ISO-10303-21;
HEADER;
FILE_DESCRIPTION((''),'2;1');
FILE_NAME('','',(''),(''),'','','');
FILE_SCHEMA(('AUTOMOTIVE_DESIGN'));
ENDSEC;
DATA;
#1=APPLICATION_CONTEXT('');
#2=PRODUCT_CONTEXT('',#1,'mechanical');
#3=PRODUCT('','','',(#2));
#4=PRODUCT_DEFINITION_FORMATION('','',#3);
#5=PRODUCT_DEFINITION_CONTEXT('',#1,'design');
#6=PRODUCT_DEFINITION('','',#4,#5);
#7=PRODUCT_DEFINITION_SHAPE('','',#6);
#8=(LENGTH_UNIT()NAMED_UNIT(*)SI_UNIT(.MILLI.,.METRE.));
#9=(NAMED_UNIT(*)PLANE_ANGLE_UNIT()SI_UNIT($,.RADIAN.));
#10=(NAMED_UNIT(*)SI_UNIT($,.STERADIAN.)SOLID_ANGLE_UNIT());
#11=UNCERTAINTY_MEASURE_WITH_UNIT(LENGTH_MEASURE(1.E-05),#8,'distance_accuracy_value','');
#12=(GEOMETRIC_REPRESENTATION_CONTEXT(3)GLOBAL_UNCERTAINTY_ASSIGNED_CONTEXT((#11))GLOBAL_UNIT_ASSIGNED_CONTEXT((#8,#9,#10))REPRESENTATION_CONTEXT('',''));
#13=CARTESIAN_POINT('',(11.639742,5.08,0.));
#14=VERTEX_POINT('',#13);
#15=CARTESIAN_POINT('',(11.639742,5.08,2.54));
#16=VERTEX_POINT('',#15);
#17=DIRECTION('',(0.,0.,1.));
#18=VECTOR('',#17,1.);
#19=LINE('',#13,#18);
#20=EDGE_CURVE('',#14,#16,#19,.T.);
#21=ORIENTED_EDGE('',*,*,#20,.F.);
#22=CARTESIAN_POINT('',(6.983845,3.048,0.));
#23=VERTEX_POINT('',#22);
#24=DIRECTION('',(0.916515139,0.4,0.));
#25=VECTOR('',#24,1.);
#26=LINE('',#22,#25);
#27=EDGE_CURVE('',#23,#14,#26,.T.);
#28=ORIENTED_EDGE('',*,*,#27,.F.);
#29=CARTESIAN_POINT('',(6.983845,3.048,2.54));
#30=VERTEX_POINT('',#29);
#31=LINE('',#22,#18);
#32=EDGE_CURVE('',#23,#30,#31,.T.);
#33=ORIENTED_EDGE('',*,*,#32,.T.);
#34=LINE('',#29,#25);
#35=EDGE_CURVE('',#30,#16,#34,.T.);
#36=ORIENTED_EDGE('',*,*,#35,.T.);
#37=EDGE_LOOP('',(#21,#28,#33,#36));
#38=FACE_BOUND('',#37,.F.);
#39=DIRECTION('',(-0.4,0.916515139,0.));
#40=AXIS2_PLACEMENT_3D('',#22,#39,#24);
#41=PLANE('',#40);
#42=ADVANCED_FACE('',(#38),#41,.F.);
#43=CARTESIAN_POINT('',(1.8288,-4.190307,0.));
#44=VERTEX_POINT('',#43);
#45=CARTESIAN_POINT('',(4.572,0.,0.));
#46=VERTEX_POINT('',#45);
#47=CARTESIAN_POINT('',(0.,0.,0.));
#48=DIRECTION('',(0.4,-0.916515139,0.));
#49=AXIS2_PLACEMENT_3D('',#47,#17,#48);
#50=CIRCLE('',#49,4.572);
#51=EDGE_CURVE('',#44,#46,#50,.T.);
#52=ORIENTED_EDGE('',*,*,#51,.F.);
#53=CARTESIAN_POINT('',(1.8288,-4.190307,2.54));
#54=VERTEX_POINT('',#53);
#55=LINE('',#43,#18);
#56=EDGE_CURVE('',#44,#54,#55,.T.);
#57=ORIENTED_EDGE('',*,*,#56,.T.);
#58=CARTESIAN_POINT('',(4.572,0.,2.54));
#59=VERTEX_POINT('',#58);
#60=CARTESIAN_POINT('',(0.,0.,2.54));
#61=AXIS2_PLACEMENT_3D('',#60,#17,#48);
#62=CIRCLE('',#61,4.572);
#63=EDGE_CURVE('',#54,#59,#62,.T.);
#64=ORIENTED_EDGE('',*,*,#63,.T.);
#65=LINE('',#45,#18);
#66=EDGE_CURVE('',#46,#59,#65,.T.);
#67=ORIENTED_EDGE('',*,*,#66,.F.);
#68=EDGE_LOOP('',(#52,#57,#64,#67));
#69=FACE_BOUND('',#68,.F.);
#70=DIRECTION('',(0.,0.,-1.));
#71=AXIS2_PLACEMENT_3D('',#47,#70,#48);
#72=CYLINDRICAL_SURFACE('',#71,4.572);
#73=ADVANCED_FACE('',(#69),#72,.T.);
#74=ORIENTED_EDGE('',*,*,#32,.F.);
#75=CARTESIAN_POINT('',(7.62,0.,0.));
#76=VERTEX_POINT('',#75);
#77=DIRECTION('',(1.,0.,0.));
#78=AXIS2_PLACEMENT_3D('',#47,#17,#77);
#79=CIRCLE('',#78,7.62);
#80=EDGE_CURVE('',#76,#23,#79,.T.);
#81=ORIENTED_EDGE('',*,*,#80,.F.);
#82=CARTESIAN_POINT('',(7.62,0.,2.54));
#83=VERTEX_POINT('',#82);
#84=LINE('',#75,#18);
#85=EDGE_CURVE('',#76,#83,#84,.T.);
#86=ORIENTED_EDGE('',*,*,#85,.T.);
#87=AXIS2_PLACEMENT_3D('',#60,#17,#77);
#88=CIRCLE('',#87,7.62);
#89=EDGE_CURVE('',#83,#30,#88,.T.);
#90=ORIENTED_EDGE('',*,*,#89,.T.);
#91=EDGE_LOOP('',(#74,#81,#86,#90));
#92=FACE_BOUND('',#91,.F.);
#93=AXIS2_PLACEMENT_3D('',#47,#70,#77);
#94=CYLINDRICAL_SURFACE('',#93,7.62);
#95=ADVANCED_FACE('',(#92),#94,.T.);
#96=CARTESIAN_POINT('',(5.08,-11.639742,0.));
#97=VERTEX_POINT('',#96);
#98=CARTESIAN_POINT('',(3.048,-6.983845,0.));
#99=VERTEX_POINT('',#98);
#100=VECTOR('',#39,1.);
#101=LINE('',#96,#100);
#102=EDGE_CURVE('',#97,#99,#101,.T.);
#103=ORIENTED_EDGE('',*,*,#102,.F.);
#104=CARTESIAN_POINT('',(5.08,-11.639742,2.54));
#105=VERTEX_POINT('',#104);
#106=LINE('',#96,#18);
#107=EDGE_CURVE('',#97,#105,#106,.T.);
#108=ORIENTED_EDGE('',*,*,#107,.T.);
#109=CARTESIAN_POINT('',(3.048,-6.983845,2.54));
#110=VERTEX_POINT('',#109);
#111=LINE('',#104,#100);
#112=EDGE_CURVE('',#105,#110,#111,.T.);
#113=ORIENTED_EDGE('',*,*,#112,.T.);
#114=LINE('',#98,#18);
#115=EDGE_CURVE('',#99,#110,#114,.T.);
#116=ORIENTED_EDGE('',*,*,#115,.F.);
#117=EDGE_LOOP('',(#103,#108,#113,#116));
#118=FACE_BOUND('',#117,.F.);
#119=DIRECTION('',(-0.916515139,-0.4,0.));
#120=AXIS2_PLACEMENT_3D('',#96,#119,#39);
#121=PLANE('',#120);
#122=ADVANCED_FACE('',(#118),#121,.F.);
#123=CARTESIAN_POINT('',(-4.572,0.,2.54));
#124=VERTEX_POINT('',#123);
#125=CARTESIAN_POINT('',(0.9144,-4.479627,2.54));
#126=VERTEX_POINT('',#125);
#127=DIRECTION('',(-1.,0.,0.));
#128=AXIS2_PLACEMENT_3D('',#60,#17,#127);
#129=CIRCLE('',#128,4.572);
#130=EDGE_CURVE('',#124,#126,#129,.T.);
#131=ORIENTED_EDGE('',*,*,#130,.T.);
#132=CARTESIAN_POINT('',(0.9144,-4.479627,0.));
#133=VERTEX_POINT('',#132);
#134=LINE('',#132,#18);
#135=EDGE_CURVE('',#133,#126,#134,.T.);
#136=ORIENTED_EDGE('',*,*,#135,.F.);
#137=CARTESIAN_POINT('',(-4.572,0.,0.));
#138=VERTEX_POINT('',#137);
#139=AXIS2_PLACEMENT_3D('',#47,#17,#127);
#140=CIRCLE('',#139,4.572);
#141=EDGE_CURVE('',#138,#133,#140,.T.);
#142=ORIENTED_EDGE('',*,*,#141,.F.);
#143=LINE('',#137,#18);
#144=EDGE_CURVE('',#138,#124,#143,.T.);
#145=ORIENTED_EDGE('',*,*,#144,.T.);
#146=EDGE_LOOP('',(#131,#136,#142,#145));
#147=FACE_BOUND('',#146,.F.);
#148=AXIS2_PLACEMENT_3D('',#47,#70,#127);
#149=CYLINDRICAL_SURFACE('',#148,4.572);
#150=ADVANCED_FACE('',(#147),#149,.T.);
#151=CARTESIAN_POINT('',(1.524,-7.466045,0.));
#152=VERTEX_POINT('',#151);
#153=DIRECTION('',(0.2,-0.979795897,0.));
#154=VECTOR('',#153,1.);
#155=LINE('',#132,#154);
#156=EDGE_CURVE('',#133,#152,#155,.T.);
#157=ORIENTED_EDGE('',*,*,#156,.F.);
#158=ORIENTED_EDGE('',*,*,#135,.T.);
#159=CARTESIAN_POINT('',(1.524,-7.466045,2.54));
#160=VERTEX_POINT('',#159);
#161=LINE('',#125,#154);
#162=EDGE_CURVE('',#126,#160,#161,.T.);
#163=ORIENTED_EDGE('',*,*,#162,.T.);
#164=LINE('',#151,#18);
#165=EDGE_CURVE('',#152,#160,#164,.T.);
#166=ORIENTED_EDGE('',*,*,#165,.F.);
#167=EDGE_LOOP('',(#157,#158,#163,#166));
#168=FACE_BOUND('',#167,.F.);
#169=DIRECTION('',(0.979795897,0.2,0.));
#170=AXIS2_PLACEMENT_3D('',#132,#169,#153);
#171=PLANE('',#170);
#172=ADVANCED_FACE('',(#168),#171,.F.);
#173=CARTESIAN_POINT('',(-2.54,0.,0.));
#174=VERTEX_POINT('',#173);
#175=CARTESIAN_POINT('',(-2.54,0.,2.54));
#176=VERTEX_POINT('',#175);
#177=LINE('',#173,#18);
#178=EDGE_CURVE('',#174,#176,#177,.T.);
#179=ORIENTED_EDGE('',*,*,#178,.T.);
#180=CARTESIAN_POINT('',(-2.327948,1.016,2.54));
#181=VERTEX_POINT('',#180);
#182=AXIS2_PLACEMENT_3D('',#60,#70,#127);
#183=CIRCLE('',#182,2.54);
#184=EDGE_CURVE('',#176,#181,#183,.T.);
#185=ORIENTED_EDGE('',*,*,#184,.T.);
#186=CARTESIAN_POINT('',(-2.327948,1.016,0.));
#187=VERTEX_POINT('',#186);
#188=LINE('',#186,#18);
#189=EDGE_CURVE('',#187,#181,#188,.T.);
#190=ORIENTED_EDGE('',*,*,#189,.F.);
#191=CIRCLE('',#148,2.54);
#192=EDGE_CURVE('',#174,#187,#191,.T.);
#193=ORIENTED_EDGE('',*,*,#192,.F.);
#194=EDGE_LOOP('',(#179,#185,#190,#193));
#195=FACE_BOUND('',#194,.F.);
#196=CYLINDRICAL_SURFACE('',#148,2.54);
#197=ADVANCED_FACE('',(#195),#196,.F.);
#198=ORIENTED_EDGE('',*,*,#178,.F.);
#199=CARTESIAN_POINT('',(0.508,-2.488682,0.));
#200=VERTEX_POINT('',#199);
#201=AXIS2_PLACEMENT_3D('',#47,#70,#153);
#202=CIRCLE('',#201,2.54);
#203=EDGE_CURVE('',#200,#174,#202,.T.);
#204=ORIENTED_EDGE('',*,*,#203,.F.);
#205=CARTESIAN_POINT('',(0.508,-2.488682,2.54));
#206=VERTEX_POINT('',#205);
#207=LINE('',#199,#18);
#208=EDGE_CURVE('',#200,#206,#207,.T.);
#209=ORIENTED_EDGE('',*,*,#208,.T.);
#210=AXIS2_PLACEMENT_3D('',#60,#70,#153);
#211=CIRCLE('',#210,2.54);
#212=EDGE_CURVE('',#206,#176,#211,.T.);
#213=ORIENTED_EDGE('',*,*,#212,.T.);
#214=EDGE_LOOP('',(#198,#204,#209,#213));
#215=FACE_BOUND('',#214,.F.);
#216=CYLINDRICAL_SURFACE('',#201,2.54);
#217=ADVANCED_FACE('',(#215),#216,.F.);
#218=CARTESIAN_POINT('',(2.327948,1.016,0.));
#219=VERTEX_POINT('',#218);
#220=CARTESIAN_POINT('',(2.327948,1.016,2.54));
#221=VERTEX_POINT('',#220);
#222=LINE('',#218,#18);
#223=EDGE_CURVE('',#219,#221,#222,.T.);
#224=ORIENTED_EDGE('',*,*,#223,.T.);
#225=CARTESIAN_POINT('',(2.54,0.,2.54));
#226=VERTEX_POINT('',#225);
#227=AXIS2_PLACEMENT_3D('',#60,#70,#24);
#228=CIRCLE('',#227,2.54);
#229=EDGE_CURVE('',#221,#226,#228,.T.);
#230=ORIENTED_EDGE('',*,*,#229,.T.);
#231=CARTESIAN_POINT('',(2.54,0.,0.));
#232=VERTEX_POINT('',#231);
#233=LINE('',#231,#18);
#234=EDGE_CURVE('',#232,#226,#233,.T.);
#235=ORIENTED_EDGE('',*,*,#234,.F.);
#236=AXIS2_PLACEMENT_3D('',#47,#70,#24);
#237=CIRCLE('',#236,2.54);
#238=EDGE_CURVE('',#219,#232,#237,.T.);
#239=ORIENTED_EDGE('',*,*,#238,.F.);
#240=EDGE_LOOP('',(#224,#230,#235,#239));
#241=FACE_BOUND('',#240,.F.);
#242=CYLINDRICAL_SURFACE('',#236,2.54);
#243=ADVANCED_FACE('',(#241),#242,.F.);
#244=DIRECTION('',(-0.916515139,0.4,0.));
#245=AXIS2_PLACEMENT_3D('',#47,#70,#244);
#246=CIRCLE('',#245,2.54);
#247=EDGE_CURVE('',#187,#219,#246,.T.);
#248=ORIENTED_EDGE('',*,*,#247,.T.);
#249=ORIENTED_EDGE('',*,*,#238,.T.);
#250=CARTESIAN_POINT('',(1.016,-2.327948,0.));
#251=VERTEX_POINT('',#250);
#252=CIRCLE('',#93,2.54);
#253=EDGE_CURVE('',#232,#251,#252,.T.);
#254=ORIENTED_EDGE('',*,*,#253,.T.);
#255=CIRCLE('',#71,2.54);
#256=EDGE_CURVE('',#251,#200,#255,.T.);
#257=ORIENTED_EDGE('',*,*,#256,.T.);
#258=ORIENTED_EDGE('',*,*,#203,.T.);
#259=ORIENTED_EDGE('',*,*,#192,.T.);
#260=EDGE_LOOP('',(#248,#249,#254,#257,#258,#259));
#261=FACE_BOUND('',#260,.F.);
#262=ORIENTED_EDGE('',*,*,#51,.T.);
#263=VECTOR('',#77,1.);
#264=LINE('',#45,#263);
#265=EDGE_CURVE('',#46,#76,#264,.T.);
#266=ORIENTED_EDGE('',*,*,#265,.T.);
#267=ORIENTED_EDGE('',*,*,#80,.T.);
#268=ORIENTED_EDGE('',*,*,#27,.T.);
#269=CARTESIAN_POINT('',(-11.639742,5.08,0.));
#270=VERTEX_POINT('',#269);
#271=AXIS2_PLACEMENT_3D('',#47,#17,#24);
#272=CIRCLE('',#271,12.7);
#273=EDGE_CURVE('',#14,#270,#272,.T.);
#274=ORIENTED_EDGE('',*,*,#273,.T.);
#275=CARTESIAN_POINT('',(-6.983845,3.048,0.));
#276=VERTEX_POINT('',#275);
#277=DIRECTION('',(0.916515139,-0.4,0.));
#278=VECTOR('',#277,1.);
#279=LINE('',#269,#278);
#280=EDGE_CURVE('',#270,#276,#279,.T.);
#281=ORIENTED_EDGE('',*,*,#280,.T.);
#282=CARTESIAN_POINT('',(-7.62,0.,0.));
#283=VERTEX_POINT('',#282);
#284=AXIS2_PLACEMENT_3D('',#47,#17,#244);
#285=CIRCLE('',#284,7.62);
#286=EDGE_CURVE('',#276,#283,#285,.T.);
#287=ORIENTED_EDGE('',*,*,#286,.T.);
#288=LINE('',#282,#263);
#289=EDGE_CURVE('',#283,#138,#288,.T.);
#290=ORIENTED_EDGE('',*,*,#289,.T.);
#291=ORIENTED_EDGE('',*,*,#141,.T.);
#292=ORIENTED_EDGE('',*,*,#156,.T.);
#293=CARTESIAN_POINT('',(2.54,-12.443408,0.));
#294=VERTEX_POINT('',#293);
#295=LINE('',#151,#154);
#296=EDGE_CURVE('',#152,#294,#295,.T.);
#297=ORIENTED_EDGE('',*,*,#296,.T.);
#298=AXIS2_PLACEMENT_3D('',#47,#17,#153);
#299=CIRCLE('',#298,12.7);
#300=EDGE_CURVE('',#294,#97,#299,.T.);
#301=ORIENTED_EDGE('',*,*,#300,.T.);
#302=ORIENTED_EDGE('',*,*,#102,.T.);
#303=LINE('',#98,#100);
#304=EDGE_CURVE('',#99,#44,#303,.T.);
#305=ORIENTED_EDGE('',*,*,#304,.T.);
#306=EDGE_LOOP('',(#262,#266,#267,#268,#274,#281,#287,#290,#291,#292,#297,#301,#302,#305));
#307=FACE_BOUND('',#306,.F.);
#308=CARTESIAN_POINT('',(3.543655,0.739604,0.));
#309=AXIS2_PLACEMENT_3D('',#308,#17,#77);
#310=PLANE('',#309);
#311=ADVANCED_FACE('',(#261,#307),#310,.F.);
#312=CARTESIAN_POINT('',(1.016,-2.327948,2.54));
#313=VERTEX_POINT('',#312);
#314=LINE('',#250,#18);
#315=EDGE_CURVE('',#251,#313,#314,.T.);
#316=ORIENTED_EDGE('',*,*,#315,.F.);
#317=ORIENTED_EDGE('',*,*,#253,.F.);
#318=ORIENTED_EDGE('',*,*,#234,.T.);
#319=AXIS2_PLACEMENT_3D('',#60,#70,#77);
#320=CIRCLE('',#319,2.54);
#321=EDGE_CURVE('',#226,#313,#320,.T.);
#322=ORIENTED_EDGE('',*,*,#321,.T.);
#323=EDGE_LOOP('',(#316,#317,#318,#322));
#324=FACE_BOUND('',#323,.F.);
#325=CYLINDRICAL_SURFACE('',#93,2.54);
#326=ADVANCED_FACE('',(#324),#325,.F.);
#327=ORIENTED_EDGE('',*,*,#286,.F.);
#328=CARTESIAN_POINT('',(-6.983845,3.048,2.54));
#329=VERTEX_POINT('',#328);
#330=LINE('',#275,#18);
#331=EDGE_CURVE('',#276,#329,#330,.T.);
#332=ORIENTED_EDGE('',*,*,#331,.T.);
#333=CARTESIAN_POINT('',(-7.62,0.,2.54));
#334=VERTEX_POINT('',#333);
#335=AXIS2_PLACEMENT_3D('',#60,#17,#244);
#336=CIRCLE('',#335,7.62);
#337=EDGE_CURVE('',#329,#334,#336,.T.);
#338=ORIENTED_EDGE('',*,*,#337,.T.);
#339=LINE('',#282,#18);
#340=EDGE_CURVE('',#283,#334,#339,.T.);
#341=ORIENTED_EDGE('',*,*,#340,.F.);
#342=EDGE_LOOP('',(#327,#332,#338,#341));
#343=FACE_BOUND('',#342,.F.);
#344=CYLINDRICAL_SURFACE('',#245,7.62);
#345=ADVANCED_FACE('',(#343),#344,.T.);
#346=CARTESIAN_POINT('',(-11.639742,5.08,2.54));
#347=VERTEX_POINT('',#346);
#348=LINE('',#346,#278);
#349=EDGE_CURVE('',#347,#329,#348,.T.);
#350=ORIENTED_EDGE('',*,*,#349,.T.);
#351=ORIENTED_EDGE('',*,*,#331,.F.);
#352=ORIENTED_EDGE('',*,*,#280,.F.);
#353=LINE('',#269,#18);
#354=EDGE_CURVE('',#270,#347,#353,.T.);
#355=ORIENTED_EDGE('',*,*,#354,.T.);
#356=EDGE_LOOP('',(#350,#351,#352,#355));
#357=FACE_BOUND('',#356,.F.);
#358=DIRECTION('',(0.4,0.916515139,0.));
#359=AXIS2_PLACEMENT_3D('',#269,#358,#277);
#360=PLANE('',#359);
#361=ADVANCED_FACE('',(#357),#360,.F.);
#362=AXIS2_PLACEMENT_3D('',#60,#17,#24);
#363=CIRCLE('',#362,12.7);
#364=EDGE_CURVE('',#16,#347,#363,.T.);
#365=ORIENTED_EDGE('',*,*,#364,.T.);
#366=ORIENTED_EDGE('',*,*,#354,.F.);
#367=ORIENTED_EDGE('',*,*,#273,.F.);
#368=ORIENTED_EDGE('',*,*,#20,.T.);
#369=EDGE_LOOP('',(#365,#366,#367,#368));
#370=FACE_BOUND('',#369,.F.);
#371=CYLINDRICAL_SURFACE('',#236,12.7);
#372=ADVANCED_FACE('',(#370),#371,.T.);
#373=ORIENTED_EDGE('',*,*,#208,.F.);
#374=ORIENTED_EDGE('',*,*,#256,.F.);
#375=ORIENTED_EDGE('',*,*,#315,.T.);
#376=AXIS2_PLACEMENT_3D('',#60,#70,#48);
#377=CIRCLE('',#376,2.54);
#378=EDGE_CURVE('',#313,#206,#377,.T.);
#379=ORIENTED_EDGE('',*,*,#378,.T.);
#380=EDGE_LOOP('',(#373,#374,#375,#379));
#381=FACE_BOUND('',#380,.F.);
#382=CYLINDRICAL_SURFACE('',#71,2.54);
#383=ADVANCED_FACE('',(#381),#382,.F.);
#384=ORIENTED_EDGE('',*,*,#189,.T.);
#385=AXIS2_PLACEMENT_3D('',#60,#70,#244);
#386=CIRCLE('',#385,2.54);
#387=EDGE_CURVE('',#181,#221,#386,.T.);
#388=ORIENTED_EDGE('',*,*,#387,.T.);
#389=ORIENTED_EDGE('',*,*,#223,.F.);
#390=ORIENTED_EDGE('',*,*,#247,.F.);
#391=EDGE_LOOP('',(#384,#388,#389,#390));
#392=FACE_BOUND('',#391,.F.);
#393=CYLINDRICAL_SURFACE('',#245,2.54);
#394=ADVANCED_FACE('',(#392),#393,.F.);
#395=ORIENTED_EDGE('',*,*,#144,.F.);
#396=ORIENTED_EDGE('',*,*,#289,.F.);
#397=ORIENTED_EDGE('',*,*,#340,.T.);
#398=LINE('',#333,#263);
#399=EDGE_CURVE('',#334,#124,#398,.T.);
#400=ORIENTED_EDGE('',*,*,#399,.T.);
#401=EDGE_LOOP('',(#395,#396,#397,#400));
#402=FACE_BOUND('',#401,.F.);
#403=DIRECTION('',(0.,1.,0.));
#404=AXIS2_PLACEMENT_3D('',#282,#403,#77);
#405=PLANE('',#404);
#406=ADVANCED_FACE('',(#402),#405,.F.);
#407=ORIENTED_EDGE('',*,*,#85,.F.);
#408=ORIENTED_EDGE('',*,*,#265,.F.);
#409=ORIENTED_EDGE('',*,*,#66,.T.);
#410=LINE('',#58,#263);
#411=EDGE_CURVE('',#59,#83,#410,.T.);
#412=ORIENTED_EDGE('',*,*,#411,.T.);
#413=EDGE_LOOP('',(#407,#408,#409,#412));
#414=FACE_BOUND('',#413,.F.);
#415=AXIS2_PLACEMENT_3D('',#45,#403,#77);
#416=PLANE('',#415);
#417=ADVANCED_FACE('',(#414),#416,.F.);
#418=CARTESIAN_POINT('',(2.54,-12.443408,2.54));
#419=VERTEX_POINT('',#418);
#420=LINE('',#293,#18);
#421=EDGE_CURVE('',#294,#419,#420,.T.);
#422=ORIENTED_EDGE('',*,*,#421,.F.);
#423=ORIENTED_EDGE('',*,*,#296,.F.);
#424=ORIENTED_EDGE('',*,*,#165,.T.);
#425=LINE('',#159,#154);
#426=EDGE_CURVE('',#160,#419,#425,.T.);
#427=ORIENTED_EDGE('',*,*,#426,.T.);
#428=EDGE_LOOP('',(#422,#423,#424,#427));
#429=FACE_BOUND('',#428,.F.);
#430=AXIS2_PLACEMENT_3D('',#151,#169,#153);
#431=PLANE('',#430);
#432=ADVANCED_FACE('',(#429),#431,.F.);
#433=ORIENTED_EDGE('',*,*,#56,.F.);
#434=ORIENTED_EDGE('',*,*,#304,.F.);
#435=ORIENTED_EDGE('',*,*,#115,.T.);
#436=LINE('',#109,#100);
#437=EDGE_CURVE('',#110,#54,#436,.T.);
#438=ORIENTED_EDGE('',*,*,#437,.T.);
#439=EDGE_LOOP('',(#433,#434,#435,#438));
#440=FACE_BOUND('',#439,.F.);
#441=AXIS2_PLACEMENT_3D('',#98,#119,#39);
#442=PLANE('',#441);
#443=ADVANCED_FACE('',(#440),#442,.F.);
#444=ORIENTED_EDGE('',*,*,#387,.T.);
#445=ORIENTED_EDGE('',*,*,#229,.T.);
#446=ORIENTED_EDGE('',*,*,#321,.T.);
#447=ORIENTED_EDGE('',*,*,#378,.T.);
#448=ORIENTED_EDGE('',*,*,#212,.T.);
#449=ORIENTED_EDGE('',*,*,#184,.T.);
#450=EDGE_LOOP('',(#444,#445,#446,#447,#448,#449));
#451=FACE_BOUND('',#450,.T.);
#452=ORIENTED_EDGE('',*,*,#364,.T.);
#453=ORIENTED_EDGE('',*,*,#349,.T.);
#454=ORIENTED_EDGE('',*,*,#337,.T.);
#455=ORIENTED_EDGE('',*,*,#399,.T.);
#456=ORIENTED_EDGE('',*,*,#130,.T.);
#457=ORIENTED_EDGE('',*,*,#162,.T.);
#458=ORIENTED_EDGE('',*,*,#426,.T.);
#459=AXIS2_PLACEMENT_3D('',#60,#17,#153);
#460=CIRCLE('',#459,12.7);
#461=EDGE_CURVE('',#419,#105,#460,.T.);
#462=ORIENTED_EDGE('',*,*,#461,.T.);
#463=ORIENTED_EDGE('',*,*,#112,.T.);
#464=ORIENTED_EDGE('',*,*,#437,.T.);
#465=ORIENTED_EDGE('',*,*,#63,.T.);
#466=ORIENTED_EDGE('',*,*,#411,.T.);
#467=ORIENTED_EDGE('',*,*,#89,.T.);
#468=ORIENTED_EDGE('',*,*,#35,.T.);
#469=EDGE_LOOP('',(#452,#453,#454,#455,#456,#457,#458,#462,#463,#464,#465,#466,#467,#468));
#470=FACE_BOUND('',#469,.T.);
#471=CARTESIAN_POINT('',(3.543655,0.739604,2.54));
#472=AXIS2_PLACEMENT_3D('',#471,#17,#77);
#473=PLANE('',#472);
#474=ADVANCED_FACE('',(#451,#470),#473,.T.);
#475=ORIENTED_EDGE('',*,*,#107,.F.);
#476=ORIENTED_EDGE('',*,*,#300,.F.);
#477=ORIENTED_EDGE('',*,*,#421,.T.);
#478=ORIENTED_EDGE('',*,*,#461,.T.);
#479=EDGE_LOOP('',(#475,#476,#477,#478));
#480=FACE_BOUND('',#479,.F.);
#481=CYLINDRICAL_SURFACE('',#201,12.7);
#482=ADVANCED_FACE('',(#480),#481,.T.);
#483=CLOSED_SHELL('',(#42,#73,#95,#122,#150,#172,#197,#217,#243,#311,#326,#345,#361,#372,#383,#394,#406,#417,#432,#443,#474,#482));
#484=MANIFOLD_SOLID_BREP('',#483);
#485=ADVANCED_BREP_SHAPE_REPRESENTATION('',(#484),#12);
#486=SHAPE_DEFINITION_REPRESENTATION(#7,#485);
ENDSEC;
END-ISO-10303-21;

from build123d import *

# Parameters (mm, degrees)
F1_DEPTH = 2.54


with BuildPart() as f1:
    # F0 (on Top) → F1 (new body)
    with BuildSketch(Plane.XY):
        with BuildLine():
            ThreePointArc((2.327948453, 1.016), (2.4864220348, 0.518946495), (2.54, 0))
            Line((2.54, 0), (4.572, 0))
            ThreePointArc((4.572, 0), (4.4755596627, 0.9341036909), (4.1903072155, 1.8288))
            Line((4.1903072155, 1.8288), (2.327948453, 1.016))
        make_face()
        with BuildLine():
            Line((4.572, 0), (2.54, 0))
            ThreePointArc((2.54, 0), (2.1251164674, -1.3912152961), (1.016, -2.327948453))
            Line((1.016, -2.327948453), (1.8288, -4.1903072155))
            ThreePointArc((1.8288, -4.1903072155), (3.8252096413, -2.5041875329), (4.572, 0))
        make_face()
        with BuildLine():
            ThreePointArc((-2.327948453, 1.016), (0, 2.54), (2.327948453, 1.016))
            Line((2.327948453, 1.016), (4.1903072155, 1.8288))
            ThreePointArc((4.1903072155, 1.8288), (0, 4.572), (-4.1903072155, 1.8288))
            Line((-4.1903072155, 1.8288), (-2.327948453, 1.016))
        make_face()
        with BuildLine():
            ThreePointArc((-2.54, 0), (-2.4864220348, 0.518946495), (-2.327948453, 1.016))
            Line((-2.327948453, 1.016), (-4.1903072155, 1.8288))
            ThreePointArc((-4.1903072155, 1.8288), (-4.4755596627, 0.9341036909), (-4.572, 0))
            Line((-4.572, 0), (-2.54, 0))
        make_face()
        with BuildLine():
            Line((0.9144, -4.4796268416), (0.508, -2.4886815787))
            ThreePointArc((0.508, -2.4886815787), (-1.6064370514, -1.9674755399), (-2.54, 0))
            Line((-2.54, 0), (-4.572, 0))
            ThreePointArc((-4.572, 0), (-2.8915866925, -3.5414559718), (0.9144, -4.4796268416))
        make_face()
        with BuildLine():
            ThreePointArc((1.016, -2.327948453), (0.7662263272, -2.4216724005), (0.508, -2.4886815787))
            Line((0.508, -2.4886815787), (0.9144, -4.4796268416))
            ThreePointArc((0.9144, -4.4796268416), (1.3792073889, -4.359010321), (1.8288, -4.1903072155))
            Line((1.8288, -4.1903072155), (1.016, -2.327948453))
        make_face()
        with BuildLine():
            ThreePointArc((4.1903072155, 1.8288), (4.4755596627, 0.9341036909), (4.572, 0))
            Line((4.572, 0), (7.62, 0))
            ThreePointArc((7.62, 0), (7.4592661045, 1.5568394849), (6.9838453591, 3.048))
            Line((6.9838453591, 3.048), (4.1903072155, 1.8288))
        make_face()
        with BuildLine():
            ThreePointArc((-4.1903072155, 1.8288), (0, 4.572), (4.1903072155, 1.8288))
            Line((4.1903072155, 1.8288), (6.9838453591, 3.048))
            ThreePointArc((6.9838453591, 3.048), (0, 7.62), (-6.9838453591, 3.048))
            Line((-6.9838453591, 3.048), (-4.1903072155, 1.8288))
        make_face()
        with BuildLine():
            ThreePointArc((-4.572, 0), (-4.4755596627, 0.9341036909), (-4.1903072155, 1.8288))
            Line((-4.1903072155, 1.8288), (-6.9838453591, 3.048))
            ThreePointArc((-6.9838453591, 3.048), (-7.4592661045, 1.5568394849), (-7.62, 0))
            Line((-7.62, 0), (-4.572, 0))
        make_face()
        with BuildLine():
            ThreePointArc((1.8288, -4.1903072155), (1.3792073889, -4.359010321), (0.9144, -4.4796268416))
            Line((0.9144, -4.4796268416), (1.524, -7.466044736))
            ThreePointArc((1.524, -7.466044736), (2.2986789815, -7.2650172016), (3.048, -6.9838453591))
            Line((3.048, -6.9838453591), (1.8288, -4.1903072155))
        make_face()
        with BuildLine():
            ThreePointArc((-6.9838453591, 3.048), (0, 7.62), (6.9838453591, 3.048))
            Line((6.9838453591, 3.048), (11.6397422652, 5.08))
            ThreePointArc((11.6397422652, 5.08), (0, 12.7), (-11.6397422652, 5.08))
            Line((-11.6397422652, 5.08), (-6.9838453591, 3.048))
        make_face()
        with BuildLine():
            ThreePointArc((3.048, -6.9838453591), (2.2986789815, -7.2650172016), (1.524, -7.466044736))
            Line((1.524, -7.466044736), (2.54, -12.4434078933))
            ThreePointArc((2.54, -12.4434078933), (3.8311316358, -12.1083620027), (5.08, -11.6397422652))
            Line((5.08, -11.6397422652), (3.048, -6.9838453591))
        make_face()
    extrude(amount=F1_DEPTH)


solid = f1.part
